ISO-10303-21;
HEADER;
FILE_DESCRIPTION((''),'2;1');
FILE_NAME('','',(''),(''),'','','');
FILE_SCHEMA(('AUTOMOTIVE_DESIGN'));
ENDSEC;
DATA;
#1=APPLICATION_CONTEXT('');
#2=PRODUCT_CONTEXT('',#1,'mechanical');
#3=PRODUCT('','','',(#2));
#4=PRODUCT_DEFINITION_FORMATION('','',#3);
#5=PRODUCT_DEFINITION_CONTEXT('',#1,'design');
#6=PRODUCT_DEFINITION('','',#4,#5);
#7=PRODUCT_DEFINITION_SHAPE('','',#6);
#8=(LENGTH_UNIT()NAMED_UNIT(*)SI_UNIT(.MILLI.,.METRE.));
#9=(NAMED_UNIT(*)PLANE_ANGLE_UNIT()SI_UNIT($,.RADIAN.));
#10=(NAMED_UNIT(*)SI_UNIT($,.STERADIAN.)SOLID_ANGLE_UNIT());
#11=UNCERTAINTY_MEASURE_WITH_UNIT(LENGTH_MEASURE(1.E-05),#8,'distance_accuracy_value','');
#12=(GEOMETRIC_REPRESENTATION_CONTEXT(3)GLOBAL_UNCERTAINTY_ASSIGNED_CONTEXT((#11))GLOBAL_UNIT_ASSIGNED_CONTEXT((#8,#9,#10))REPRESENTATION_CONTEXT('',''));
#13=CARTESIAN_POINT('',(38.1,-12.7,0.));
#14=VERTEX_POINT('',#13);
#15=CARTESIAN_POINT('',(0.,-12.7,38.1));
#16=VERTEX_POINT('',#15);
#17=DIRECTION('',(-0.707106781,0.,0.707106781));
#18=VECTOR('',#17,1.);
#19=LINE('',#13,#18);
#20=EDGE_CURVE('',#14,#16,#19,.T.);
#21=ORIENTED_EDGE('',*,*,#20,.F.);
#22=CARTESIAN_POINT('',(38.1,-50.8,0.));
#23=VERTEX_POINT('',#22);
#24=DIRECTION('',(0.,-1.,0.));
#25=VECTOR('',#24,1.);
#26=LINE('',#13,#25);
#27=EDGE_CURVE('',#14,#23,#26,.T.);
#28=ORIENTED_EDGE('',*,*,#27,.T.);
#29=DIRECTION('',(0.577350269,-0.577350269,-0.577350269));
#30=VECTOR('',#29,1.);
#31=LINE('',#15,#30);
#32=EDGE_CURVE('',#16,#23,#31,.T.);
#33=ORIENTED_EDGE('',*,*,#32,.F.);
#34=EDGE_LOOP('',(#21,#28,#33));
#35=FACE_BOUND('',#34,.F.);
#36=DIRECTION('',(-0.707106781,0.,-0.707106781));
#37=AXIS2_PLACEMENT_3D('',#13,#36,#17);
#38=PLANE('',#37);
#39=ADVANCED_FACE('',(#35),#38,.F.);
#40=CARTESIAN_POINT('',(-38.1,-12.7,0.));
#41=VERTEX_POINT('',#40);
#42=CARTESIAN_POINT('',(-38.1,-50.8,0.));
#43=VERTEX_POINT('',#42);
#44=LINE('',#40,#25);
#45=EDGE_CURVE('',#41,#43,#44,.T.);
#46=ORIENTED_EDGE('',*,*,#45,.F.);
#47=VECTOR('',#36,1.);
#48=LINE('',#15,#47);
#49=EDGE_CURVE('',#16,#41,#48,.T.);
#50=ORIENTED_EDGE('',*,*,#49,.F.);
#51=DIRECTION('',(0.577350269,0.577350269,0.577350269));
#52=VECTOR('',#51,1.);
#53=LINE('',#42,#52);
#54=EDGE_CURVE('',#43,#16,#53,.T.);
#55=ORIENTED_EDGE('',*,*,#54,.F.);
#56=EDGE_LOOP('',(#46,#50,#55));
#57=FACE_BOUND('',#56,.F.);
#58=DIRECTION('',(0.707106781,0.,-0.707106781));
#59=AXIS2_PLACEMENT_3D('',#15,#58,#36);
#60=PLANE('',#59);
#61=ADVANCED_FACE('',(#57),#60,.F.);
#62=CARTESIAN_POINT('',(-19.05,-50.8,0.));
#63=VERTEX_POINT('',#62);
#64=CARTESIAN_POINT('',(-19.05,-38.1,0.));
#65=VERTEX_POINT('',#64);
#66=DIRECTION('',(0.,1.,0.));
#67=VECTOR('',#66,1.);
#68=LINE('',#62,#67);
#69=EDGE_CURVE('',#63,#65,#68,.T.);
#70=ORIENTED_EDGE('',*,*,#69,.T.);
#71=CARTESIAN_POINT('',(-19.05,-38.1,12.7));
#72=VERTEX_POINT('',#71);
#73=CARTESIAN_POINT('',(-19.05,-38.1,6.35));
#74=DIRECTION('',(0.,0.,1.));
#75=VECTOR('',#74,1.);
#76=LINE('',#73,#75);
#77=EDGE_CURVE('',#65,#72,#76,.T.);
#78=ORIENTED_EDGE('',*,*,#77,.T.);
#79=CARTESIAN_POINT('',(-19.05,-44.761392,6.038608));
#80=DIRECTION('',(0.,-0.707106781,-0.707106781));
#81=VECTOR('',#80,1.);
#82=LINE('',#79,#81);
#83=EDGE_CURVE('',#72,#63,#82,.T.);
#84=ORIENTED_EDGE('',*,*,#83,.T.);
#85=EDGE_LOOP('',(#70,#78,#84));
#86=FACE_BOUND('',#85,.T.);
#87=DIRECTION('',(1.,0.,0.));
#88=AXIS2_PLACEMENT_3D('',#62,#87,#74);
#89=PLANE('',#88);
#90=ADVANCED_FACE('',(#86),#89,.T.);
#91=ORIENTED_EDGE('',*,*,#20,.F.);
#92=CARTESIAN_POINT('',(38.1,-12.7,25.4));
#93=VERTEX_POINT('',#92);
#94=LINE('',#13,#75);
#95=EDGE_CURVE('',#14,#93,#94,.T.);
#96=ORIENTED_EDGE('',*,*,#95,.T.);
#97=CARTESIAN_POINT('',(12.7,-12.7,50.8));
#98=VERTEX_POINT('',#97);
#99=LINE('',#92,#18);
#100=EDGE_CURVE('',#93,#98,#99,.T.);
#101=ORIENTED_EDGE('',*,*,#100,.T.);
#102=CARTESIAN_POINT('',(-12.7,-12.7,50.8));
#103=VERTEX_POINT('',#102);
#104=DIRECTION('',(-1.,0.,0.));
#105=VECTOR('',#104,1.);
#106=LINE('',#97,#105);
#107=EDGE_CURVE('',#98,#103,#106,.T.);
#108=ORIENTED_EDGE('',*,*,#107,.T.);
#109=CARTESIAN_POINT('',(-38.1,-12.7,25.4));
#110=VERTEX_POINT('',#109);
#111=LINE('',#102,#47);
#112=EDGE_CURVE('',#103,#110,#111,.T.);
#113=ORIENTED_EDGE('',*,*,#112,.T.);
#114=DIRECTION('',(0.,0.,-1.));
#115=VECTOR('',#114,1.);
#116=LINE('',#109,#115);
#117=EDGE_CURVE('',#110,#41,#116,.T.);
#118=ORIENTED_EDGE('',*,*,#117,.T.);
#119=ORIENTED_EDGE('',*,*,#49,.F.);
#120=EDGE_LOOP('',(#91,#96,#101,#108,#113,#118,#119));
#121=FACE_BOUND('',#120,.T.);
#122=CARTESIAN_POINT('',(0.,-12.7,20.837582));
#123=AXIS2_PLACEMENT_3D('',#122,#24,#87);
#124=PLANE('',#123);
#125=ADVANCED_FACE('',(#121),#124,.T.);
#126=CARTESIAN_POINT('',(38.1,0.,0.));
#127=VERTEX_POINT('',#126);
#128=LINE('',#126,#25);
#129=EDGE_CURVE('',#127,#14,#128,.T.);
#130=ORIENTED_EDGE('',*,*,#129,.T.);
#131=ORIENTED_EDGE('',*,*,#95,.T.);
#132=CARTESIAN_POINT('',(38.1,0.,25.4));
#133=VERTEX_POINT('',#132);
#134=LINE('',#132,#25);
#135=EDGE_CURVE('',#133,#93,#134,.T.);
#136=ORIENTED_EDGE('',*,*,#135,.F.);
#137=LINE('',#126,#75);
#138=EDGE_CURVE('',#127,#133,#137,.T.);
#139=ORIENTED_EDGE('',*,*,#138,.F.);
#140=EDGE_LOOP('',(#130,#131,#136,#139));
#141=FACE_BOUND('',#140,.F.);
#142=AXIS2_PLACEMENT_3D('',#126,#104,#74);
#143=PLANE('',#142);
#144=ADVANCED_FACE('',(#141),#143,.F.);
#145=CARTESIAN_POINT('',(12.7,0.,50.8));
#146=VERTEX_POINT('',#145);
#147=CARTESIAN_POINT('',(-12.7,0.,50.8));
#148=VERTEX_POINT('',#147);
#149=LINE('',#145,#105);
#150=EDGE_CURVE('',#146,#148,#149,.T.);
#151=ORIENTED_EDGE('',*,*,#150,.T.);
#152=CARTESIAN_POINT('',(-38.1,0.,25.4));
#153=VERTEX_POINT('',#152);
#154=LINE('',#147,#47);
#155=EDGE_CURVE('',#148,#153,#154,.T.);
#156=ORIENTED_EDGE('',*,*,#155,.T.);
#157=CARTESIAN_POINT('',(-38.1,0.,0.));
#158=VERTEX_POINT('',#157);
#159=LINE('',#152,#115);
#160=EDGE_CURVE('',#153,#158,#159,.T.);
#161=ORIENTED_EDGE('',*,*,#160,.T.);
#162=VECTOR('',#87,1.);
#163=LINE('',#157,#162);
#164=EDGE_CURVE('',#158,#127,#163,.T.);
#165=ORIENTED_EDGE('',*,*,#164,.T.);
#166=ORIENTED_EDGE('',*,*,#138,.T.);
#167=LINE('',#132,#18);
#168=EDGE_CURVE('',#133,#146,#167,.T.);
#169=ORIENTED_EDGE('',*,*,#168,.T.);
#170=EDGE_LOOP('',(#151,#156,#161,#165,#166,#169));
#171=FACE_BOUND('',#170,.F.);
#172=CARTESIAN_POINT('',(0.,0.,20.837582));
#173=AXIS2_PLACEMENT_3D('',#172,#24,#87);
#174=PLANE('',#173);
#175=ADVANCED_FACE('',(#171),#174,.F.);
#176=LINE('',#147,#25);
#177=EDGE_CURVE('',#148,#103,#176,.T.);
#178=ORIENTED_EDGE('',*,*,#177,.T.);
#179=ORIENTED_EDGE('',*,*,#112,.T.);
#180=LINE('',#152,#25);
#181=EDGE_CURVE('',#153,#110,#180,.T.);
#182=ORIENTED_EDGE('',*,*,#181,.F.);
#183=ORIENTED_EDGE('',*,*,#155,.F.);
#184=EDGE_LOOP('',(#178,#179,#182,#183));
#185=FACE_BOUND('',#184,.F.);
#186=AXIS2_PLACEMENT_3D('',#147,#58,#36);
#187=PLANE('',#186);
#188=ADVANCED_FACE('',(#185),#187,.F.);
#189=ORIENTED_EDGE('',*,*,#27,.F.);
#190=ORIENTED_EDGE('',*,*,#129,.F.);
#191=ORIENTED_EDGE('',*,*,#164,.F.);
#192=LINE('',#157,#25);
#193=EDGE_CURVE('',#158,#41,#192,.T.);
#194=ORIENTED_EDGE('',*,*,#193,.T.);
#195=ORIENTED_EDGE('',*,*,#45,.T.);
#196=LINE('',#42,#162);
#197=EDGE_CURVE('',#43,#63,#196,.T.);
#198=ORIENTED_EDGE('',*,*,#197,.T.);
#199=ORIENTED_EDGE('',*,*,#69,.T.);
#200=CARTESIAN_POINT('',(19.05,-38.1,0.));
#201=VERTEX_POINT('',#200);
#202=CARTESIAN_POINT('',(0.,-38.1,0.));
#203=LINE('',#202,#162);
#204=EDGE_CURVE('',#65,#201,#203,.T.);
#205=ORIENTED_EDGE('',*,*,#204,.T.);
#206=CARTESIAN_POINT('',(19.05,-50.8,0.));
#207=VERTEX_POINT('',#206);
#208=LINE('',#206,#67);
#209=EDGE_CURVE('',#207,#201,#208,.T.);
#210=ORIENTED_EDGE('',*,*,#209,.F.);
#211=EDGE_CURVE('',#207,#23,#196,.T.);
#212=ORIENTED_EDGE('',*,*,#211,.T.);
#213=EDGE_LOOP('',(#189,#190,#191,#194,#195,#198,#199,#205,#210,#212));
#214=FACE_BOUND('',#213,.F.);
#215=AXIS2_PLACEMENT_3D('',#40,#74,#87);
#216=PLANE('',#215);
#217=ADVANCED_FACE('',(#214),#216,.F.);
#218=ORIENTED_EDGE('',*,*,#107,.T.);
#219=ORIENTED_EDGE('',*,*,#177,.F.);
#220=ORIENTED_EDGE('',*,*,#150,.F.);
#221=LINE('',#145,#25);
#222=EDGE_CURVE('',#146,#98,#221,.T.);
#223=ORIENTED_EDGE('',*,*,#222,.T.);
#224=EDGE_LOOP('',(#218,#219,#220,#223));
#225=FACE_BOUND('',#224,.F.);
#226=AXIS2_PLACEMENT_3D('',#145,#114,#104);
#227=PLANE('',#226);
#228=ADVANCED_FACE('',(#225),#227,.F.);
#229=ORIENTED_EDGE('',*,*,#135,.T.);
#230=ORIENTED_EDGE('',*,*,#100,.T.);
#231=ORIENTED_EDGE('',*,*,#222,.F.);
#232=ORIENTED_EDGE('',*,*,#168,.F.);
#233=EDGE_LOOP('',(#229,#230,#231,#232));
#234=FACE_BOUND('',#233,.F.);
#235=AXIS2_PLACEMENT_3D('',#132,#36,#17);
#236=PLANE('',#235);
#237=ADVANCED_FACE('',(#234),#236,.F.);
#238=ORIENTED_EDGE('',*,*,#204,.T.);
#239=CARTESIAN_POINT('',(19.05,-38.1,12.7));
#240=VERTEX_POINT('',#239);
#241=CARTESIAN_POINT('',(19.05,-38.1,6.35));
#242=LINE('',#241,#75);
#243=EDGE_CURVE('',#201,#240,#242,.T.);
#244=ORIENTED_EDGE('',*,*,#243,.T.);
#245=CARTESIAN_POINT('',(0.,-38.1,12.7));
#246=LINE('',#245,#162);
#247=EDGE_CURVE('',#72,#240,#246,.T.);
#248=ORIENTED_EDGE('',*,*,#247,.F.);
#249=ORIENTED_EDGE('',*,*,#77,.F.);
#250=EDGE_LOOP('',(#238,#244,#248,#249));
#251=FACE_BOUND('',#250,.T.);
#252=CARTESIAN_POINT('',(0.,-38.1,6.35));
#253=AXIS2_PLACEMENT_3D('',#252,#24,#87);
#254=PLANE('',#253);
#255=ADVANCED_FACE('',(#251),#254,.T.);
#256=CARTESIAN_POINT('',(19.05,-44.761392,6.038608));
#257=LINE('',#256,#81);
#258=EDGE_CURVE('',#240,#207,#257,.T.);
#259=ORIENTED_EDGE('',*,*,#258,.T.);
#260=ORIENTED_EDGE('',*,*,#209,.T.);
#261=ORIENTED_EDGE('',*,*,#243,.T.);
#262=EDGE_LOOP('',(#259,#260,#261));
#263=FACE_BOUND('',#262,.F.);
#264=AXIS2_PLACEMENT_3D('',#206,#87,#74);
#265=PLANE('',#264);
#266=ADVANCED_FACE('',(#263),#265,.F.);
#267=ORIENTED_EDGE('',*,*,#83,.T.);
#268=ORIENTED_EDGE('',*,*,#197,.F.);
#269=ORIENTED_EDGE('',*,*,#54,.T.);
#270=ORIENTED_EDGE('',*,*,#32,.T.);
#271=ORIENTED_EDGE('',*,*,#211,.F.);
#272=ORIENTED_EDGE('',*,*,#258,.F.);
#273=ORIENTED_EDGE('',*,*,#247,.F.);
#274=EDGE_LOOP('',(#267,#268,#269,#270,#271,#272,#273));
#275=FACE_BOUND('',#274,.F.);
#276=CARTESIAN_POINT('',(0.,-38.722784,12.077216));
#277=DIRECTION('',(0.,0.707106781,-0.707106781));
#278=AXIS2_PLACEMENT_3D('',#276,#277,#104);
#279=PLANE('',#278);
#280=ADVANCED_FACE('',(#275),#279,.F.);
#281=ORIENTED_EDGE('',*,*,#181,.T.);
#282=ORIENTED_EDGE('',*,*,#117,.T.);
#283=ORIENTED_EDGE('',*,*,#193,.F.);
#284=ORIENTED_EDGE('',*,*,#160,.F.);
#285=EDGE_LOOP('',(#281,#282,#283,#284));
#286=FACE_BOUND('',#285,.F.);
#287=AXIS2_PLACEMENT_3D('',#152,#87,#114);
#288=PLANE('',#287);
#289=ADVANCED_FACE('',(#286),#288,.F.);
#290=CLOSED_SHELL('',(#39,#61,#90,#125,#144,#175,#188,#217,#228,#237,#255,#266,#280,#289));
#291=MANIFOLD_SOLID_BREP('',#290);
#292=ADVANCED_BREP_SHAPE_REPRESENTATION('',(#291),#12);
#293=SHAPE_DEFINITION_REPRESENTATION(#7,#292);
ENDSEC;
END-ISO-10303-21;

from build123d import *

# Parameters (mm, degrees)
F1_DEPTH = 12.7
F3_DEPTH = 38.1
F6_DEPTH = 35.9220244843
F8_W     = 38.1
F8_H     = 12.7
F9_DEPTH = 12.7


# Not quite as in the source:
# - a feature names something its author has since deleted; it is built from what else it names


with BuildPart() as f1:
    # F0 (on Front) → F1 (new body)
    with BuildSketch(Plane.XZ):
        Polygon((-38.1, 25.4), (-38.1, 0), (38.1, 0), (38.1, 25.4), (12.7, 50.8), (-12.7, 50.8), align=None)
    extrude(amount=F1_DEPTH)

    # F2 (on face) → F3 (join)
    with BuildSketch(Plane.XZ.offset(12.7)):
        Polygon((0, 38.1), (-38.1, 0), (38.1, 0), align=None)
    extrude(amount=F3_DEPTH)

    # F5 (on face) → F6 (cut, through all)
    with BuildSketch(Plane(origin=(0, -25.4, 25.4), x_dir=(-1, 0, 0), z_dir=(0, 0.7071067812, -0.7071067812))):
        Polygon((-38.1, -35.9210244843), (38.1, -35.9210244843), (0, 17.9605122421), align=None)
    extrude(amount=-F6_DEPTH, mode=Mode.SUBTRACT)

    # F8 (on offset) → F9 (cut)
    with BuildSketch(Plane.XZ.offset(50.8)):
        with Locations((0, 6.35)):
            Rectangle(F8_W, F8_H)
    extrude(amount=-F9_DEPTH, mode=Mode.SUBTRACT)


solid = f1.part
